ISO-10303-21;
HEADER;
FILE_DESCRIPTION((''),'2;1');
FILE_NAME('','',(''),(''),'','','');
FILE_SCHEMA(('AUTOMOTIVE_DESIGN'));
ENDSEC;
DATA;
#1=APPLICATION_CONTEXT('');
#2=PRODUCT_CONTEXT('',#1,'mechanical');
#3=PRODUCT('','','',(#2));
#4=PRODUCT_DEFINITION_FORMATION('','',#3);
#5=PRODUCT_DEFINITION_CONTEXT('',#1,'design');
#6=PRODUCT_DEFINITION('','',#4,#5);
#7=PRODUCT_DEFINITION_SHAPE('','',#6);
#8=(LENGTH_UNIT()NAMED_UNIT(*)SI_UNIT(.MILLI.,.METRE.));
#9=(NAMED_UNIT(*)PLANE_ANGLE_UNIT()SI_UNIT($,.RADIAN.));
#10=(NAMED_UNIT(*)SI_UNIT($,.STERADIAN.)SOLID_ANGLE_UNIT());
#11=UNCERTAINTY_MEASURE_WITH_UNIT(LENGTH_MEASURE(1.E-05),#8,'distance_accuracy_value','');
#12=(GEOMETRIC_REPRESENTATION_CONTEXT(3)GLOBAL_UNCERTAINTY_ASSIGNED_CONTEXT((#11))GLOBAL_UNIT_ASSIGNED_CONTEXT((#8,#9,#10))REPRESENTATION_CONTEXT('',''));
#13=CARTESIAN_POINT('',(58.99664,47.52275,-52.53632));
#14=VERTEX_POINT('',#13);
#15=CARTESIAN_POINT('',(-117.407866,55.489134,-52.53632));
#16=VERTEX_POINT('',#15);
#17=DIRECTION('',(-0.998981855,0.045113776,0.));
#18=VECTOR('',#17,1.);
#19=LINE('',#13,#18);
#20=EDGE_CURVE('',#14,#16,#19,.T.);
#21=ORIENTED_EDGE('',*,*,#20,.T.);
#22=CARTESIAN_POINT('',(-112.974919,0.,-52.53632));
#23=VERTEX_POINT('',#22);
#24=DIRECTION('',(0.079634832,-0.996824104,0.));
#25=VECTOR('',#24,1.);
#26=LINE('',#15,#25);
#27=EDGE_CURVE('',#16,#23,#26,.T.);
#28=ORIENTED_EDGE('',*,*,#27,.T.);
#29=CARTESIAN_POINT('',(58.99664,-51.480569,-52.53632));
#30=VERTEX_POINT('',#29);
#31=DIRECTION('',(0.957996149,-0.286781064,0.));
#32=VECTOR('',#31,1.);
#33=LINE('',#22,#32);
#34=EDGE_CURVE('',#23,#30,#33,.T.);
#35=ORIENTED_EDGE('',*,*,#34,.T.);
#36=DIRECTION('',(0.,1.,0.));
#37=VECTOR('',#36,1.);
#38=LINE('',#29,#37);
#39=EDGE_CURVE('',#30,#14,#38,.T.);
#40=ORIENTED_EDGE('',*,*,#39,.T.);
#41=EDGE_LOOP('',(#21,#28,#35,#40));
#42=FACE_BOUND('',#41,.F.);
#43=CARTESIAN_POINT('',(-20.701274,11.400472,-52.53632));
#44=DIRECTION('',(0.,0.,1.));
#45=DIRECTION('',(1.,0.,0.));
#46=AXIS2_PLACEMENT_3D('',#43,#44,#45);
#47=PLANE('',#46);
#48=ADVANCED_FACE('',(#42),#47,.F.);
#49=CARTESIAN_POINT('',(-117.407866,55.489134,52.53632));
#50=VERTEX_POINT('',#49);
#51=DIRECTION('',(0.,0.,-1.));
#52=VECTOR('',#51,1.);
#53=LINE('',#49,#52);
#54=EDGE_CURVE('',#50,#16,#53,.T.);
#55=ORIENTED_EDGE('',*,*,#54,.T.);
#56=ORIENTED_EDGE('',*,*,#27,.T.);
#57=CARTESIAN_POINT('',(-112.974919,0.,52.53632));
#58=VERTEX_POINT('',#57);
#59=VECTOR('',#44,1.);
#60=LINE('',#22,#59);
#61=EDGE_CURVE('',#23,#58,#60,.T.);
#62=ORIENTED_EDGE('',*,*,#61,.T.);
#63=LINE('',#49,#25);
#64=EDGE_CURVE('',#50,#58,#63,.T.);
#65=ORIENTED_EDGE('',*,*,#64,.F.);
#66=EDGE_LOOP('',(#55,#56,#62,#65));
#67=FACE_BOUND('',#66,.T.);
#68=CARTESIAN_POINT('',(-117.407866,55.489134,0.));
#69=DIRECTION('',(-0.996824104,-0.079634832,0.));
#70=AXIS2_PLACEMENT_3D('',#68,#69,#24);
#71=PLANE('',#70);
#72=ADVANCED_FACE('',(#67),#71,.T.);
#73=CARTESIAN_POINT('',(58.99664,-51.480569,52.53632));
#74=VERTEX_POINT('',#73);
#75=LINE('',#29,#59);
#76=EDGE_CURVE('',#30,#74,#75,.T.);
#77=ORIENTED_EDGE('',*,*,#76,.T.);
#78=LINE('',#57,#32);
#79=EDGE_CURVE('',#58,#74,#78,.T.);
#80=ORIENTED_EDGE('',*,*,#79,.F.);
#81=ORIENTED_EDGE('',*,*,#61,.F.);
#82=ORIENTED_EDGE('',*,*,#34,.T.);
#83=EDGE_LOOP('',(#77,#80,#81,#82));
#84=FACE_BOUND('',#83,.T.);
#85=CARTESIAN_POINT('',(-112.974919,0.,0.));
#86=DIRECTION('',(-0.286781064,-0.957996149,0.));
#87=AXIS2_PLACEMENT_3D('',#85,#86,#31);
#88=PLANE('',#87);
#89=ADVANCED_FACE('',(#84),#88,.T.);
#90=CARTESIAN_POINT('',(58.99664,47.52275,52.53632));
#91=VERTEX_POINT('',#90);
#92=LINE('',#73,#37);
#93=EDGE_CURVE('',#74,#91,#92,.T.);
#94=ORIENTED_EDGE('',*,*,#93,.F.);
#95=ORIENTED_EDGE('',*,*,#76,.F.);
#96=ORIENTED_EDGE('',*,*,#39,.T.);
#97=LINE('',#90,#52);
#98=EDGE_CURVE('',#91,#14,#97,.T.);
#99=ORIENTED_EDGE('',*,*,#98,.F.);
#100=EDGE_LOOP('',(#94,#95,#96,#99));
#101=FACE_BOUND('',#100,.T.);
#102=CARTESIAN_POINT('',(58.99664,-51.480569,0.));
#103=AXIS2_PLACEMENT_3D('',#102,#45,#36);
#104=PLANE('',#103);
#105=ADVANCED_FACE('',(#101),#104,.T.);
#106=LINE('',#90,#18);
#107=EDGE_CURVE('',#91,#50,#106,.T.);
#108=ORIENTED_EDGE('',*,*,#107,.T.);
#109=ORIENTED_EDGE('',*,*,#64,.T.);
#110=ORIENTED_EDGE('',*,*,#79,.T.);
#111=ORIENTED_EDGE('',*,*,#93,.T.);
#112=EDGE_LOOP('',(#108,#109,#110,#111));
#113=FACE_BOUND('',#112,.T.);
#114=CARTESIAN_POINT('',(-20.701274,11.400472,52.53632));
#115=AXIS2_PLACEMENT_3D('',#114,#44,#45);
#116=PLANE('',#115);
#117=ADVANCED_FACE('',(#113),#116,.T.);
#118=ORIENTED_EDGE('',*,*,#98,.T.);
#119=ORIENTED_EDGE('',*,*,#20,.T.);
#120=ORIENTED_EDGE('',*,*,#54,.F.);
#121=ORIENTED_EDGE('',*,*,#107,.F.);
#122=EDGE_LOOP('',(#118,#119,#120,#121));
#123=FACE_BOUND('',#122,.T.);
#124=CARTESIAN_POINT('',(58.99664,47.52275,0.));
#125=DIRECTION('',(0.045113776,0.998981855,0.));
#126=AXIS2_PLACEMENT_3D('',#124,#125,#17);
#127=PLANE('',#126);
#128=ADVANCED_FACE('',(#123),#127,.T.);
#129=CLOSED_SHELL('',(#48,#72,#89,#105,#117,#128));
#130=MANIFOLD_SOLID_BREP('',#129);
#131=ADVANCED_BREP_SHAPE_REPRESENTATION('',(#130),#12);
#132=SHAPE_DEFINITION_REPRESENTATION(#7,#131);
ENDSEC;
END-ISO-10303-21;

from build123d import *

# Parameters (mm, degrees)
F1_DEPTH = 52.53632


# Not quite as in the source:
# - a feature names something its author has since deleted; it is built from what else it names


with BuildPart() as f1:
    # F0 (on Top) → F1 (new body, symmetric)
    with BuildSketch(Plane.XY):
        Polygon((-117.4078658223, 55.4891340435), (-112.9749193788, 0), (58.9966401458, -51.4805689454), (58.9966401458, 47.5227497518), align=None)
    extrude(amount=F1_DEPTH, both=True)


solid = f1.part
